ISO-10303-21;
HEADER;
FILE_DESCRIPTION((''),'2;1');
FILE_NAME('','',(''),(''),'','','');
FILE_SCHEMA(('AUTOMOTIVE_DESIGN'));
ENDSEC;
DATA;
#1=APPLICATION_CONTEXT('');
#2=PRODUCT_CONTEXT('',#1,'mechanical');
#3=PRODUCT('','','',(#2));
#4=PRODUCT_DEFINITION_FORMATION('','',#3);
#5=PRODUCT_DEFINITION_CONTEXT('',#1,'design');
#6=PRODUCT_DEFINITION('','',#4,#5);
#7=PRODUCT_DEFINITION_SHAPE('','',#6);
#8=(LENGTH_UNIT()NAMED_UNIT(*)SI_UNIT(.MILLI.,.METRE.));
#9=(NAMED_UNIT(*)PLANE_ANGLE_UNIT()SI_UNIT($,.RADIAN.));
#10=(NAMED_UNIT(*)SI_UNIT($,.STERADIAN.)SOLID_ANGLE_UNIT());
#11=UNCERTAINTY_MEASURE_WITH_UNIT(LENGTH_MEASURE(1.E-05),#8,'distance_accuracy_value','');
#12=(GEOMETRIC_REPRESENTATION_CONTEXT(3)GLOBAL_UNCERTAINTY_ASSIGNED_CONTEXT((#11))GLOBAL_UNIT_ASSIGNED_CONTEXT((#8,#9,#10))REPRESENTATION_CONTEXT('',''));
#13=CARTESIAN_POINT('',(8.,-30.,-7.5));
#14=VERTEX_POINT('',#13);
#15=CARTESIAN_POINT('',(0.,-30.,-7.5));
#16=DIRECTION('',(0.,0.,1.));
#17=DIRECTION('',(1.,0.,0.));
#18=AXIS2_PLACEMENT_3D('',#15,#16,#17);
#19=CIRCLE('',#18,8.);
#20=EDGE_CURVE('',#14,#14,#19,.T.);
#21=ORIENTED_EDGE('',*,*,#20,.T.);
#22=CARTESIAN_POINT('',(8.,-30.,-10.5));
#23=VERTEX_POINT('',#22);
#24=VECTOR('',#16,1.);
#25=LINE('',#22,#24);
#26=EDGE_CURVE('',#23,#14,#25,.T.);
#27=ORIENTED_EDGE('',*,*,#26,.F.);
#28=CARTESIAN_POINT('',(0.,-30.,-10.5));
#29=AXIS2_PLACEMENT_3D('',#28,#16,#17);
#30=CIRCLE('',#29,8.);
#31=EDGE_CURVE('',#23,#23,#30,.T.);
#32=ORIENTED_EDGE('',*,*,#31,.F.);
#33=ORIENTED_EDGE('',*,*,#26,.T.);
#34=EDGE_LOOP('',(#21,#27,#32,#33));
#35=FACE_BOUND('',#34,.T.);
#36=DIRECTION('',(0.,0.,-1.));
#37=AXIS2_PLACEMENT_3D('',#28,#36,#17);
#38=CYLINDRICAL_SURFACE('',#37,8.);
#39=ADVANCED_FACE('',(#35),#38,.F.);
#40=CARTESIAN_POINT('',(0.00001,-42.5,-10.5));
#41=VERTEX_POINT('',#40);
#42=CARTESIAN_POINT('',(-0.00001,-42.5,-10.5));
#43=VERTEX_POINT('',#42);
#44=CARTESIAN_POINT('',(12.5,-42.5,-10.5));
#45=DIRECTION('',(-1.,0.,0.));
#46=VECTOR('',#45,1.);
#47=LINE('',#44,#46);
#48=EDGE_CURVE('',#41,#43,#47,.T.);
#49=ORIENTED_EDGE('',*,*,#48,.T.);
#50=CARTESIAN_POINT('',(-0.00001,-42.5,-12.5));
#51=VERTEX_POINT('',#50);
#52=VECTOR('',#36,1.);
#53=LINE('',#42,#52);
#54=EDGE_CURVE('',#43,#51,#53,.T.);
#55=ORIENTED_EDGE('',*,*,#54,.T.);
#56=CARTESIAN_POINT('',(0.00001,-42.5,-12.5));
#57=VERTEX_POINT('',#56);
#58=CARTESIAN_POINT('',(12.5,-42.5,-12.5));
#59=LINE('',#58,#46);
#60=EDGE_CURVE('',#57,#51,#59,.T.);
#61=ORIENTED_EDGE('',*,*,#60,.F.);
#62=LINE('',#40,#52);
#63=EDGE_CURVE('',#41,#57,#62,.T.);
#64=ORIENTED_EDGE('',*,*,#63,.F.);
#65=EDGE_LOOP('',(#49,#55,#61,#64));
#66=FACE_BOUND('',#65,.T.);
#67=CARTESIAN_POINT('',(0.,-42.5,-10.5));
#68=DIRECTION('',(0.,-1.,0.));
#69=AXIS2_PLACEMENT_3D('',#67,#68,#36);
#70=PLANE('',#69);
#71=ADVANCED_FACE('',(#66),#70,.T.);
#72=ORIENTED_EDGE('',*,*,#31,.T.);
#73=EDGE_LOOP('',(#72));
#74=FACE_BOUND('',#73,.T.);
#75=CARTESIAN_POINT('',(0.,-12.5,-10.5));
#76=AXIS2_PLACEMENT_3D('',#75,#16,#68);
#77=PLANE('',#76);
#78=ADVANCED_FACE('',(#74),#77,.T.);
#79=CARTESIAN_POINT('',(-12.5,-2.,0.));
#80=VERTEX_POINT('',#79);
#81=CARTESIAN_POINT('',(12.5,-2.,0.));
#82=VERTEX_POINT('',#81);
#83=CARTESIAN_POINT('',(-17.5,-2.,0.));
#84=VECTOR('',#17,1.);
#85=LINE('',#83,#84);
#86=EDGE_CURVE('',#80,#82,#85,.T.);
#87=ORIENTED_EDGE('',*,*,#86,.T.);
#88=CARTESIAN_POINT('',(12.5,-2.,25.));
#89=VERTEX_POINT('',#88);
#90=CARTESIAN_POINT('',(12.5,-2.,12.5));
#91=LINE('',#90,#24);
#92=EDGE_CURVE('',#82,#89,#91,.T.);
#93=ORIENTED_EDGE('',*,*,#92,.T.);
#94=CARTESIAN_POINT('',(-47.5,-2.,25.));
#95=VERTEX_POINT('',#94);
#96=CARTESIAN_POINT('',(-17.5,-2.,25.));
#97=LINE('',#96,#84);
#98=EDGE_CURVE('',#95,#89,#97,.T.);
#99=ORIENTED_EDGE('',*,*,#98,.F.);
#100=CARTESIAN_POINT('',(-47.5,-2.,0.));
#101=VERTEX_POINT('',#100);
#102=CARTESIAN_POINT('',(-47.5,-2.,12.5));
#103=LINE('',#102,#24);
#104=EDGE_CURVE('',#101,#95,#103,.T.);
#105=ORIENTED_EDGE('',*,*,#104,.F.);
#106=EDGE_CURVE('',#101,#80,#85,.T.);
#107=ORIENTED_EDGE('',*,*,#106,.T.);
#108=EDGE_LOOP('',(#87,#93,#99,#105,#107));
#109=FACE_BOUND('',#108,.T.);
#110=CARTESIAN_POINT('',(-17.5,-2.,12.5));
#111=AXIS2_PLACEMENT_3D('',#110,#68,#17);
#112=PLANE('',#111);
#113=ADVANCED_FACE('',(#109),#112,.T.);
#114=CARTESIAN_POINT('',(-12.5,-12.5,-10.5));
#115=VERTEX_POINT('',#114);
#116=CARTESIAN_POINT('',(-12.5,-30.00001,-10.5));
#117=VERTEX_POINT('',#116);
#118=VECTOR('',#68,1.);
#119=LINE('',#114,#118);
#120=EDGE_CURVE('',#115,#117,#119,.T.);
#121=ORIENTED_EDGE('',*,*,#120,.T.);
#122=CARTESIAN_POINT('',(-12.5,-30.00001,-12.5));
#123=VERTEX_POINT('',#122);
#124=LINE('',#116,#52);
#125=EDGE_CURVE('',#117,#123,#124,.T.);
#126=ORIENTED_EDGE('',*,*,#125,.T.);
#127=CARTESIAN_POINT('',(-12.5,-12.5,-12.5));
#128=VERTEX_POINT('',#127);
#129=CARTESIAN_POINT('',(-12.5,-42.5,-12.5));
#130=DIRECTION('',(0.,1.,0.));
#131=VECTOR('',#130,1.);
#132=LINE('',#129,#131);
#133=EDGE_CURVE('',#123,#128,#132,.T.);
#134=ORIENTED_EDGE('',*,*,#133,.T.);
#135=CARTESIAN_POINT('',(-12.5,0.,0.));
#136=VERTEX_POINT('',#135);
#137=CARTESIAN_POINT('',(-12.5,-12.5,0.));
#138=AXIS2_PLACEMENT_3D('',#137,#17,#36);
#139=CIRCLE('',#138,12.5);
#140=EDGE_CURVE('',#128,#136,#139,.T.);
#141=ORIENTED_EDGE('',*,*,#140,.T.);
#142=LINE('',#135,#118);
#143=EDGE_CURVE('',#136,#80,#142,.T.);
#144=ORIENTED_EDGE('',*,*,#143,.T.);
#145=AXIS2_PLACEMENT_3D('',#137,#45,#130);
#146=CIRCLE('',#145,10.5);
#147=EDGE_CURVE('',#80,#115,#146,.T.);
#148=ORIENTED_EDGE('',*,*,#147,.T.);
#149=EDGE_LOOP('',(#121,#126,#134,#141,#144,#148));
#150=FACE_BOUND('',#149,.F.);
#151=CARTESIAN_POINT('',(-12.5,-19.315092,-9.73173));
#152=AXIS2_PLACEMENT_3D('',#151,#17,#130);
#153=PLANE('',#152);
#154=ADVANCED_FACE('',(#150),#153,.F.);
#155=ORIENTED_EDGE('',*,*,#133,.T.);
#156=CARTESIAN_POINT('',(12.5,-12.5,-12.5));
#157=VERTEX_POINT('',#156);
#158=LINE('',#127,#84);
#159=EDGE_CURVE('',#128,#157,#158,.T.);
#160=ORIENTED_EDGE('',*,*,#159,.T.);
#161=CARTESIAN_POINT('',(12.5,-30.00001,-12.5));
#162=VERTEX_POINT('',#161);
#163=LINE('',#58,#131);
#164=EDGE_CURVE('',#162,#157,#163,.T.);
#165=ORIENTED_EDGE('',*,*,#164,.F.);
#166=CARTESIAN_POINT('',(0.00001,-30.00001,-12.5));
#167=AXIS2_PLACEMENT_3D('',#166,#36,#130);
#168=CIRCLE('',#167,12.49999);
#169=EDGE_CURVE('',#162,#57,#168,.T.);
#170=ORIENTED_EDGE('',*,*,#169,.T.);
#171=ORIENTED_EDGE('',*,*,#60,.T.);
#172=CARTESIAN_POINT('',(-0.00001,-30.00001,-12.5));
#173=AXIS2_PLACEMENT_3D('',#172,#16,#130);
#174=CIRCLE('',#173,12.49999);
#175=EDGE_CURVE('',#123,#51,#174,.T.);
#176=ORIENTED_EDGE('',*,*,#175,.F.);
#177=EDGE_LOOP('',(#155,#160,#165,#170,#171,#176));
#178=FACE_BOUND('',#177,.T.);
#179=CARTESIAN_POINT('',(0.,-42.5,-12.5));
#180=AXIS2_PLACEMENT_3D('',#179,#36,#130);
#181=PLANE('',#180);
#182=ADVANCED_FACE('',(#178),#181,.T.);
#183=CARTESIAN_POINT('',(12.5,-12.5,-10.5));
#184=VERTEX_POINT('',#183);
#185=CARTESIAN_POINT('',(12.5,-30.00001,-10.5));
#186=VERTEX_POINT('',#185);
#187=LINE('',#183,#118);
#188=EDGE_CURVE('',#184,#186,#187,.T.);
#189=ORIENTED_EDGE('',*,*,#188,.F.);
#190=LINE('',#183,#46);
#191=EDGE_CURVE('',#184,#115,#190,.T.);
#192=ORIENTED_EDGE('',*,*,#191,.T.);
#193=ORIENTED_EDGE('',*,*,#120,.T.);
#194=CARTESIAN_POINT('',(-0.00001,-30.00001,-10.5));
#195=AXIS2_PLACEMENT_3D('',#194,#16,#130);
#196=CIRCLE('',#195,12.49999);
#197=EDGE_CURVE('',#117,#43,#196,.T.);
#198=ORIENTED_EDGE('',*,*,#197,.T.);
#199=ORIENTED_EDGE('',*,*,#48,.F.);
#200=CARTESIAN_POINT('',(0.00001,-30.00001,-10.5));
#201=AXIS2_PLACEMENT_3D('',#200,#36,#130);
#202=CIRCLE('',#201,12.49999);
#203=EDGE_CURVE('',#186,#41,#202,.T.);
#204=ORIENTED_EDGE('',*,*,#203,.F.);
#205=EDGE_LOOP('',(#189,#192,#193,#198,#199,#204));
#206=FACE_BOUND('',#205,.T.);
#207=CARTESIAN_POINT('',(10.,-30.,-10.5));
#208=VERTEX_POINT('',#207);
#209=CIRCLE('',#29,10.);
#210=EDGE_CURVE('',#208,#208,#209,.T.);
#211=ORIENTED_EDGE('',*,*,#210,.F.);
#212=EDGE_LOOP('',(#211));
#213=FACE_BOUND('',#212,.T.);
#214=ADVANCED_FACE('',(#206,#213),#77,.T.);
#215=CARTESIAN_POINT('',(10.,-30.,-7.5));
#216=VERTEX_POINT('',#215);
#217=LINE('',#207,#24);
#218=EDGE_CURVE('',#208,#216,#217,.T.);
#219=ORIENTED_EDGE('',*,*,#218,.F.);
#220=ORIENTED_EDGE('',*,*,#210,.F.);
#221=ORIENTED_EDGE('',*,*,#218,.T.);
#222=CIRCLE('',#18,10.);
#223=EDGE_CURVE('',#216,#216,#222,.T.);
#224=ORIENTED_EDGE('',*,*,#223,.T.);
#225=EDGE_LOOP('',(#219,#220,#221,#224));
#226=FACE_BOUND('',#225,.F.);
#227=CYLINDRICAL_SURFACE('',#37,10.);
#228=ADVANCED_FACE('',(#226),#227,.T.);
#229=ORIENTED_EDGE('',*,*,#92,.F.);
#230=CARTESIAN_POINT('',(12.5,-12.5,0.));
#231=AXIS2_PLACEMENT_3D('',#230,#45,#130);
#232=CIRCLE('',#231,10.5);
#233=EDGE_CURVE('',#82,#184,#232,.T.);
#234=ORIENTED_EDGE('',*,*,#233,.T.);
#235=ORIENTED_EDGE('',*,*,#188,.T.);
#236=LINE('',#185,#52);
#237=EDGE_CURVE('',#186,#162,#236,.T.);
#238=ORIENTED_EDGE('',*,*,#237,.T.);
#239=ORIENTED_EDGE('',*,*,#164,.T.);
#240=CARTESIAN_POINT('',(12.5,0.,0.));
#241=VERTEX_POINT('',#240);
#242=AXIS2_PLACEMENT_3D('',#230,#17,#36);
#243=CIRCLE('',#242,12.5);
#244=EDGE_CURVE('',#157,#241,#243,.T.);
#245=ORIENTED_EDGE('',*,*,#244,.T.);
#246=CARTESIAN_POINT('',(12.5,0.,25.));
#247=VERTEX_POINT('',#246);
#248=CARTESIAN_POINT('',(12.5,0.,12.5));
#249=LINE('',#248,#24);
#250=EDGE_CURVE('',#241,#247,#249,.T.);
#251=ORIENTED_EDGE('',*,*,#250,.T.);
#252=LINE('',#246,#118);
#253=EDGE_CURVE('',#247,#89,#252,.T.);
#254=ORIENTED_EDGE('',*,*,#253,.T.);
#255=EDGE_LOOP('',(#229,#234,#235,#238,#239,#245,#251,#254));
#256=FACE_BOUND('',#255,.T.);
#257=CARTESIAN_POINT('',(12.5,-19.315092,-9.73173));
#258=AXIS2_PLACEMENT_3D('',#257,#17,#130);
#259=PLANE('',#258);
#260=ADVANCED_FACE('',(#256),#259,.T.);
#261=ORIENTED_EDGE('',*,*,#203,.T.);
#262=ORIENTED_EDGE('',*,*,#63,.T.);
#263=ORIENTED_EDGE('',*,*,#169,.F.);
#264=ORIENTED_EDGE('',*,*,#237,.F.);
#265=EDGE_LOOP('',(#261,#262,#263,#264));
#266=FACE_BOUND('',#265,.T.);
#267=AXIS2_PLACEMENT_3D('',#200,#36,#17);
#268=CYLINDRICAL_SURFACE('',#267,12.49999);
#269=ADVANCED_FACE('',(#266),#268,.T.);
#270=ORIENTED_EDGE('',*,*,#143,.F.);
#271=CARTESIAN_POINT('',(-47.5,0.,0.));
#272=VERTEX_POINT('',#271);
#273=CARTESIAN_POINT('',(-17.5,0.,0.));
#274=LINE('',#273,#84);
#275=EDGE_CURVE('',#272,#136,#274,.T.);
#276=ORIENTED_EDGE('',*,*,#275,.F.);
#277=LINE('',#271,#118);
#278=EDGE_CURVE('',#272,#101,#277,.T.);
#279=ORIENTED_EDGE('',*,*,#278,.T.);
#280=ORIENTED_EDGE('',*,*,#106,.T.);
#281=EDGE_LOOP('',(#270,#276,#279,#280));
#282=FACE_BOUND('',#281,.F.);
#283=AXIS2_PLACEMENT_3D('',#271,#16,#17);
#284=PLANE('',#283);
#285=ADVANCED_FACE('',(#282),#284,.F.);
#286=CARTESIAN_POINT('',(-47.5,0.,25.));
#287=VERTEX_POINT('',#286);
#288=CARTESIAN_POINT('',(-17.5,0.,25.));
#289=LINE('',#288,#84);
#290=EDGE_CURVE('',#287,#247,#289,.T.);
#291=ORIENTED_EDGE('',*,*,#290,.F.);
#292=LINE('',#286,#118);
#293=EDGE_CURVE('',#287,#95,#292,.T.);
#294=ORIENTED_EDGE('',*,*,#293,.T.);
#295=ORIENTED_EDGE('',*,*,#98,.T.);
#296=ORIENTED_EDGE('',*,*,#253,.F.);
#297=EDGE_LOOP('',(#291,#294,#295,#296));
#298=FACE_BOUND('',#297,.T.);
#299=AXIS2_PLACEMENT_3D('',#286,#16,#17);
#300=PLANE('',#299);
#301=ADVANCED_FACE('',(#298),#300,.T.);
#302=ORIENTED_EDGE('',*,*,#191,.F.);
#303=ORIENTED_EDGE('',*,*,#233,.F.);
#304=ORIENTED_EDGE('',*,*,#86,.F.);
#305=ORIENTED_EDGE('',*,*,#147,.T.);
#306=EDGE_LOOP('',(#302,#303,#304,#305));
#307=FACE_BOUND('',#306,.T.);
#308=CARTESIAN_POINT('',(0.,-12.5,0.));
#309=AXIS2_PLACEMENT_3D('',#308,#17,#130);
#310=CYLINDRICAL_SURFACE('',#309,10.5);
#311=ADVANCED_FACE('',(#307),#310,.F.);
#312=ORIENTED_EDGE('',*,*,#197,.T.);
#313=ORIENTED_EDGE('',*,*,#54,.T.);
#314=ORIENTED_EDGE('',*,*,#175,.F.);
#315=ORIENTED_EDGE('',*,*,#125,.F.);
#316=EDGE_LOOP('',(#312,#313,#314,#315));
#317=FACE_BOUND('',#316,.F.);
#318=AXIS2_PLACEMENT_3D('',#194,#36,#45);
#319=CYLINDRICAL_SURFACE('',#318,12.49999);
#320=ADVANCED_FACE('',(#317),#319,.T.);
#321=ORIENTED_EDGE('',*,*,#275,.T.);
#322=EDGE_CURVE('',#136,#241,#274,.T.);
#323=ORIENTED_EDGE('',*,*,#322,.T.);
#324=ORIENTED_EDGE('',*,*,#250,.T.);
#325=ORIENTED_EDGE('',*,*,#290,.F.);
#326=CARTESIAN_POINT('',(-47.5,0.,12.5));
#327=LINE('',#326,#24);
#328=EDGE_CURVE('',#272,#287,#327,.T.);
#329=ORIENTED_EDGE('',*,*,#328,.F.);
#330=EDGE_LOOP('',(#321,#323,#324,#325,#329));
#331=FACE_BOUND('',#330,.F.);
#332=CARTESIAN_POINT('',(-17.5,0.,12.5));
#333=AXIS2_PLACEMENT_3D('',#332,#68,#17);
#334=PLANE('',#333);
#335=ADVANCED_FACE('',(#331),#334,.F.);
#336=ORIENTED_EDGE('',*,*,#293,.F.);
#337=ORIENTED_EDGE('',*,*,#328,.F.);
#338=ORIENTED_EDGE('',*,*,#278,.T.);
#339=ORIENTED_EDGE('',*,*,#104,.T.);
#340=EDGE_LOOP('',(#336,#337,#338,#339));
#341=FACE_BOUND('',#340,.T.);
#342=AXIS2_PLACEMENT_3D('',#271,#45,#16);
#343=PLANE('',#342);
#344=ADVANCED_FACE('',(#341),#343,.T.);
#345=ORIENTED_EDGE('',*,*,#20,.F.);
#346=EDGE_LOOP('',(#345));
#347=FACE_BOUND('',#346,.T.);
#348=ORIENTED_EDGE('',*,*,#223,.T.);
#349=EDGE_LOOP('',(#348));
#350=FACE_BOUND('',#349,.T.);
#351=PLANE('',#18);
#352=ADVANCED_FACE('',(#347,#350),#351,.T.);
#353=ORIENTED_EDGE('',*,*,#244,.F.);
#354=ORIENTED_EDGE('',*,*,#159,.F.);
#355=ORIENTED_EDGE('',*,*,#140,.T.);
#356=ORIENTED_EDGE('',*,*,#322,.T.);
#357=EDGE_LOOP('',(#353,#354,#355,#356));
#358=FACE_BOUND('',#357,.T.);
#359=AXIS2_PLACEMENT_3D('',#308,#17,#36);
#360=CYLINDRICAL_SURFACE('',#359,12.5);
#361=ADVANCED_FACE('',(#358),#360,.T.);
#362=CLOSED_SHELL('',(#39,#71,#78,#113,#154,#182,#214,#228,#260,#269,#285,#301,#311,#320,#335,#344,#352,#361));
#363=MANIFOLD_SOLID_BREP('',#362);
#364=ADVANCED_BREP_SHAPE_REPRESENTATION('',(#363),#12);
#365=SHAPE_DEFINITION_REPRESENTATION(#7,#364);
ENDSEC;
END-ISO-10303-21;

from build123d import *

# Parameters (mm, degrees)
F0_W     = 60
F0_H     = 25
F1_DEPTH = 2
F3_DEPTH = 12.5
F4_R     = 12.49999
F5_R     = 10
F5_R_2   = 8
F6_DEPTH = 3


# Not quite as in the source:
# - a fillet or chamfer is up to 0.001 mm smaller than in the source, because OpenCascade refuses the exact size


with BuildPart() as f1:
    # F0 (on Front) → F1 (new body)
    with BuildSketch(Plane.XZ):
        with Locations((-17.5, 12.5)):
            Rectangle(F0_W, F0_H)
    extrude(amount=F1_DEPTH)

    # F2 (on Right) → F3 (join, symmetric)
    with BuildSketch(Plane.YZ):
        with BuildLine():
            Line((-42.5, -12.5), (-12.5, -12.5))
            ThreePointArc((-12.5, -12.5), (-3.6611652352, -8.8388347648), (0, 0))
            Line((0, 0), (-2, 0))
            ThreePointArc((-2, 0), (-5.0753787975, -7.4246212025), (-12.5, -10.5))
            Line((-12.5, -10.5), (-42.5, -10.5))
            Line((-42.5, -10.5), (-42.5, -12.5))
        make_face()
    extrude(amount=F3_DEPTH, both=True)

    # F4 (radius 12.5 in the source; OpenCascade refuses exactly that, so slightly less here)
    f4_edges = [f1.edges().sort_by_distance(p)[0] for p in [
        (-12.5, -42.5, -11.5),
        (12.5, -42.5, -11.5),
    ]]
    fillet(f4_edges, radius=F4_R)

    # F5 (on face) → F6 (join)
    with BuildSketch(Plane.XY.offset(-10.5)):
        with Locations((0, -30)):
            Circle(F5_R)
        with Locations((0, -30)):
            Circle(F5_R_2, mode=Mode.SUBTRACT)
    extrude(amount=F6_DEPTH)


solid = f1.part
